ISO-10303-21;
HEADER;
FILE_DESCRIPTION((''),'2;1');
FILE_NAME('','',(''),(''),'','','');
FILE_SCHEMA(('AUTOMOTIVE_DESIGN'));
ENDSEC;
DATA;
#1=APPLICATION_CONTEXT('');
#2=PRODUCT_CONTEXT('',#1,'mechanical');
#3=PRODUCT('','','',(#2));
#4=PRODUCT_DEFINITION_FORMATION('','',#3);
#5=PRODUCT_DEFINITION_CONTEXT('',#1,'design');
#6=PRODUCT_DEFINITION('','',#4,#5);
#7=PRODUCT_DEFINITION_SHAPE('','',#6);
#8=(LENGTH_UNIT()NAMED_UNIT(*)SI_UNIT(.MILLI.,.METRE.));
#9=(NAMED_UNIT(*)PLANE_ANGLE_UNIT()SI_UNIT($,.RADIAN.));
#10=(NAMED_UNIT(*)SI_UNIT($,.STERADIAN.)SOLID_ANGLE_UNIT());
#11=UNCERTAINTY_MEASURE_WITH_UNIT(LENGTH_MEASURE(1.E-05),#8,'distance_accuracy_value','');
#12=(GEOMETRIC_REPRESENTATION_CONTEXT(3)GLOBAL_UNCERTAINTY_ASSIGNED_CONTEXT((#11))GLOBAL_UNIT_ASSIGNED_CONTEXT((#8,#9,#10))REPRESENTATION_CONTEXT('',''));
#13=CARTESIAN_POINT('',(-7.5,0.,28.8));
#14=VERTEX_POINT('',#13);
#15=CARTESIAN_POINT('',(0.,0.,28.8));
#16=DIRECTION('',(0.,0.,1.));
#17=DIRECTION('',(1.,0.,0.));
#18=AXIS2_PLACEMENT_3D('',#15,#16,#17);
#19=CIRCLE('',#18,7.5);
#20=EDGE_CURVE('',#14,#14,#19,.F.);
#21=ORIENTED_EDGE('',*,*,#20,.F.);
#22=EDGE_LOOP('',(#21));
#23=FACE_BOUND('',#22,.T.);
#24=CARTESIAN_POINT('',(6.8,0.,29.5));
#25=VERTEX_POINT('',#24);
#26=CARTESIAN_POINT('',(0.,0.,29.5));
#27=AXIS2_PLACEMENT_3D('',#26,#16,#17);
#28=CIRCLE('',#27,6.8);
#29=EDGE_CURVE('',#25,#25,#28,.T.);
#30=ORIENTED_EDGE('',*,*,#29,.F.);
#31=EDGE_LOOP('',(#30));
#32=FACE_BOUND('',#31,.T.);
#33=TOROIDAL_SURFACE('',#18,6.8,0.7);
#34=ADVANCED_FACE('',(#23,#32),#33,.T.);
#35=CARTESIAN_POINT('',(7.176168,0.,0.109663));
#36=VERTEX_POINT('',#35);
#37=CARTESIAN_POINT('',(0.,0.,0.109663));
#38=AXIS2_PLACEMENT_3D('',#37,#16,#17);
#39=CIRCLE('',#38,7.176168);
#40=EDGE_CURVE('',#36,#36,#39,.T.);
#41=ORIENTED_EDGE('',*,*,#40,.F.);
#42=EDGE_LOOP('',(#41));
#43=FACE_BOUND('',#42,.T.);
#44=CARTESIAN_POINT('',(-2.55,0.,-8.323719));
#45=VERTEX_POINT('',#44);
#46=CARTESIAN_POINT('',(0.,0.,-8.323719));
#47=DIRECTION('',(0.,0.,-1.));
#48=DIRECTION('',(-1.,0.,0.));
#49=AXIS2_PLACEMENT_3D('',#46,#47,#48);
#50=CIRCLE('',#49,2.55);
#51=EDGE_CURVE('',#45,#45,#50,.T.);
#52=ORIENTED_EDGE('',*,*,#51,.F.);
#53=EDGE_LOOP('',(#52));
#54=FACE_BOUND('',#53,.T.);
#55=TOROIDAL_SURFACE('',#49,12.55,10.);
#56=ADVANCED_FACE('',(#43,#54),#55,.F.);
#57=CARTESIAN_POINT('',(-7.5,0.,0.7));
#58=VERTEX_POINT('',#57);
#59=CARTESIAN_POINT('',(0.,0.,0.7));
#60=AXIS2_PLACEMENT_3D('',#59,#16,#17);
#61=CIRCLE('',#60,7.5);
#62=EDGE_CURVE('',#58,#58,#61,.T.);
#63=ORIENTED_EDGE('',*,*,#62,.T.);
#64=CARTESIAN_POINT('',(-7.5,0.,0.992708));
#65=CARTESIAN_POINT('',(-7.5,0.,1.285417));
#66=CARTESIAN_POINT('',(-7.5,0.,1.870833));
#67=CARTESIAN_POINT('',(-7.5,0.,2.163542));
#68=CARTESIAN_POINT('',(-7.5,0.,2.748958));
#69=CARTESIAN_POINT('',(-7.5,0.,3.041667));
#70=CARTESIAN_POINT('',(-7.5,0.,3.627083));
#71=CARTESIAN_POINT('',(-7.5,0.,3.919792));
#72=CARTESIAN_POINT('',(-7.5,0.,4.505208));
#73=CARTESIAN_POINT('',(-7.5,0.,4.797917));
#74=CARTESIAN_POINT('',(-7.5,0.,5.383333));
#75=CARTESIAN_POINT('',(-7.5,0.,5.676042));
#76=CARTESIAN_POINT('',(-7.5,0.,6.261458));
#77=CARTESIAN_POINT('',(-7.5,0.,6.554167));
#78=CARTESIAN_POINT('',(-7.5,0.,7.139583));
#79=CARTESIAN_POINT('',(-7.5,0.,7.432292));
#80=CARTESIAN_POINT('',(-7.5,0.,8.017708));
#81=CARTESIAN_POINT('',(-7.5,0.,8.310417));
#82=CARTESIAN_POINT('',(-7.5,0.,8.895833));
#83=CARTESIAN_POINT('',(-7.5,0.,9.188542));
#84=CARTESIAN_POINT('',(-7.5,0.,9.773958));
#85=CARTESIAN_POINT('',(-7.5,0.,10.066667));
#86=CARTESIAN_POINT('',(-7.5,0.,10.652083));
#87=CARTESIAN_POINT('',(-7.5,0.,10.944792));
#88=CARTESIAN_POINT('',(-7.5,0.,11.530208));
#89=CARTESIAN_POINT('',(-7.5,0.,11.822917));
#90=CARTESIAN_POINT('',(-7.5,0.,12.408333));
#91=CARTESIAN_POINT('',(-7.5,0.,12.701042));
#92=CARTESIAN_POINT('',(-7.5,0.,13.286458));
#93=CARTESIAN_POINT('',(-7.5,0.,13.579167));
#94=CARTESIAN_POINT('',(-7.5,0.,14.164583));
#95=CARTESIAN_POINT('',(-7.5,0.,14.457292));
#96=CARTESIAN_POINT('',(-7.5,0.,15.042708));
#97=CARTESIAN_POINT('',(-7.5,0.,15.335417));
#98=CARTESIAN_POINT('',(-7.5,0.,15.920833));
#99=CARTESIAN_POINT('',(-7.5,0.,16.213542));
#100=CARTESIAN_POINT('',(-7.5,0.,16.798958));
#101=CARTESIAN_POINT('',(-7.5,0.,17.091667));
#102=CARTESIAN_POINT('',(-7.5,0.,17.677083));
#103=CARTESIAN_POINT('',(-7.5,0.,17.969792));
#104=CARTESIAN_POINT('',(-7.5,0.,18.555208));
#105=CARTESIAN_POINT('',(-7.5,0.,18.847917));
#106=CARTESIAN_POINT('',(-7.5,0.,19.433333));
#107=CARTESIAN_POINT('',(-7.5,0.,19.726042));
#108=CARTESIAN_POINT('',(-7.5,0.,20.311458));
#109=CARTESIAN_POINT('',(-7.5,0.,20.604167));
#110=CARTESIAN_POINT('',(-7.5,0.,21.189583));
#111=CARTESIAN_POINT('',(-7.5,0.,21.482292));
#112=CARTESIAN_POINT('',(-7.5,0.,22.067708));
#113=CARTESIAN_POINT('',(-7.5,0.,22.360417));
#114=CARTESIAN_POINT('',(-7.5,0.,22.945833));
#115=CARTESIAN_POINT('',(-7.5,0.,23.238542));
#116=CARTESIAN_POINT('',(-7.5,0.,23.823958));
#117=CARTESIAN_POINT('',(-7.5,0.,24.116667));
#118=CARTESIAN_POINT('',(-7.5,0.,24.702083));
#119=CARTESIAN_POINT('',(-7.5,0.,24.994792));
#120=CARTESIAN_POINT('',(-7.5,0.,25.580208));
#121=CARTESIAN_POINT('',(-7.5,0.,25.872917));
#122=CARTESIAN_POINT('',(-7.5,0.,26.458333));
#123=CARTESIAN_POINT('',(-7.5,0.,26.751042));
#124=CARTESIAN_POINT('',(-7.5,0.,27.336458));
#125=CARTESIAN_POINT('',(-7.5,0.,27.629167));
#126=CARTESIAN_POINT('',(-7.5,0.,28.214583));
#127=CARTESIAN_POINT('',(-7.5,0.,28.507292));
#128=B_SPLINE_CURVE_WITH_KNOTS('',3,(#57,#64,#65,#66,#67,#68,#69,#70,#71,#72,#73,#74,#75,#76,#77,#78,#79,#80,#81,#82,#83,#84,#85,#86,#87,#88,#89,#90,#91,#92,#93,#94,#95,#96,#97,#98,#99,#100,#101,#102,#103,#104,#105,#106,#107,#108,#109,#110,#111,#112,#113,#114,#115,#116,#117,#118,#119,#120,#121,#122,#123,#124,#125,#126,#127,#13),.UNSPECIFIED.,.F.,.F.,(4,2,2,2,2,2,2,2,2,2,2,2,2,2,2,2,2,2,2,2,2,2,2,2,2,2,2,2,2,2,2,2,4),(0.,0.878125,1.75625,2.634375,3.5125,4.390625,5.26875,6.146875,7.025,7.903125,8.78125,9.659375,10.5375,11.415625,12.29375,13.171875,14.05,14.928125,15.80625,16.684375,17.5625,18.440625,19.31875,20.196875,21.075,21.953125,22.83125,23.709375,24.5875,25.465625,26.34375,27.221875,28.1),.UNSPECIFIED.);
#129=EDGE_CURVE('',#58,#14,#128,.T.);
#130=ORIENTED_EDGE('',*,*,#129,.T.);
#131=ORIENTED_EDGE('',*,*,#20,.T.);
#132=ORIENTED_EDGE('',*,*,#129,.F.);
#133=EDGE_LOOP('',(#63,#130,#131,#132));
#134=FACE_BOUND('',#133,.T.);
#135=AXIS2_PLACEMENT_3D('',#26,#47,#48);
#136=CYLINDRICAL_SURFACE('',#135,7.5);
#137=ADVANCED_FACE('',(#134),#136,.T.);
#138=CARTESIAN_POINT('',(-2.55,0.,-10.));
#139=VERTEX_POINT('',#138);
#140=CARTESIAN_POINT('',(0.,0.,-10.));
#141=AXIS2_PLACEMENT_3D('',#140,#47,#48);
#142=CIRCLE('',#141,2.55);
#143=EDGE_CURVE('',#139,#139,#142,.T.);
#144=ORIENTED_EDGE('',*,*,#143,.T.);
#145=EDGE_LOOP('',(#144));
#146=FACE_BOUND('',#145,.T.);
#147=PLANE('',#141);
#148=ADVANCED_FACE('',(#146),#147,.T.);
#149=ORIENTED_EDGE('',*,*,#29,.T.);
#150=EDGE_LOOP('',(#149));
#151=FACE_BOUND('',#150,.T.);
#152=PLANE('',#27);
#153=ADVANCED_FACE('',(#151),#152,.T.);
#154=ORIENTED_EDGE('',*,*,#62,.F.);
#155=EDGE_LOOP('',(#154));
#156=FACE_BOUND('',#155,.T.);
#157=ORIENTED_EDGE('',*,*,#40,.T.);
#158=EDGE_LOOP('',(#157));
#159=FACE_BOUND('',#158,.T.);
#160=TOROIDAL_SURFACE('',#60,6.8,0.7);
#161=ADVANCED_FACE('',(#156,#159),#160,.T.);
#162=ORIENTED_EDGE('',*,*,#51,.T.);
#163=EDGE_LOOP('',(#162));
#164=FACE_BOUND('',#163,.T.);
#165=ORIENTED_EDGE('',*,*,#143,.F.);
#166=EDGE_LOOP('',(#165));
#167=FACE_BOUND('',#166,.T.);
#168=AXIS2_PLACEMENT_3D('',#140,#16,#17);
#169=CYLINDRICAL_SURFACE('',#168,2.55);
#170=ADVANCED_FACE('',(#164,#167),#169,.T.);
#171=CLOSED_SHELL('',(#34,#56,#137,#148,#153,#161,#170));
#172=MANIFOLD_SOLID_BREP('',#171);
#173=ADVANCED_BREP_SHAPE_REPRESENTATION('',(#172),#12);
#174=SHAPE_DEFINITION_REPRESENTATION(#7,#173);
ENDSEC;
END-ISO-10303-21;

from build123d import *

# Parameters (mm, degrees)
SKETCH1_R           = 7.5
BOSS_EXTRUDE1_DEPTH = 29.5
SKETCH2_R           = 2.55
BOSS_EXTRUDE2_DEPTH = 10
FILLET1_R           = 0.7
FILLET2_R           = 10


with BuildPart() as part:
    # Sketch1 → Boss-Extrude1 (new body)
    with BuildSketch(Plane.XY):
        with Locations(Location((0, 0, 0), (0, 0, 180))):
            Circle(SKETCH1_R)
    extrude(amount=BOSS_EXTRUDE1_DEPTH)

    # Sketch2 → Boss-Extrude2 (add)
    with BuildSketch(Plane(origin=(0, 0, 0), x_dir=(-1, 0, 0), z_dir=(0, 0, -1))):
        Circle(SKETCH2_R)
    extrude(amount=BOSS_EXTRUDE2_DEPTH)

    # Fillet1
    fillet1_edges = [part.edges().sort_by_distance(p)[0] for p in [
        (7.5, 0, 0),
        (7.5, 0, 29.5),
    ]]
    fillet(fillet1_edges, radius=FILLET1_R)

    # Fillet2
    fillet2_edges = [part.edges().sort_by_distance(p)[0] for p in [
        (2.55, 0, 0),
    ]]
    fillet(fillet2_edges, radius=FILLET2_R - 0.0001)  # a hair under: the kernel refuses the full size


solid = part.part
